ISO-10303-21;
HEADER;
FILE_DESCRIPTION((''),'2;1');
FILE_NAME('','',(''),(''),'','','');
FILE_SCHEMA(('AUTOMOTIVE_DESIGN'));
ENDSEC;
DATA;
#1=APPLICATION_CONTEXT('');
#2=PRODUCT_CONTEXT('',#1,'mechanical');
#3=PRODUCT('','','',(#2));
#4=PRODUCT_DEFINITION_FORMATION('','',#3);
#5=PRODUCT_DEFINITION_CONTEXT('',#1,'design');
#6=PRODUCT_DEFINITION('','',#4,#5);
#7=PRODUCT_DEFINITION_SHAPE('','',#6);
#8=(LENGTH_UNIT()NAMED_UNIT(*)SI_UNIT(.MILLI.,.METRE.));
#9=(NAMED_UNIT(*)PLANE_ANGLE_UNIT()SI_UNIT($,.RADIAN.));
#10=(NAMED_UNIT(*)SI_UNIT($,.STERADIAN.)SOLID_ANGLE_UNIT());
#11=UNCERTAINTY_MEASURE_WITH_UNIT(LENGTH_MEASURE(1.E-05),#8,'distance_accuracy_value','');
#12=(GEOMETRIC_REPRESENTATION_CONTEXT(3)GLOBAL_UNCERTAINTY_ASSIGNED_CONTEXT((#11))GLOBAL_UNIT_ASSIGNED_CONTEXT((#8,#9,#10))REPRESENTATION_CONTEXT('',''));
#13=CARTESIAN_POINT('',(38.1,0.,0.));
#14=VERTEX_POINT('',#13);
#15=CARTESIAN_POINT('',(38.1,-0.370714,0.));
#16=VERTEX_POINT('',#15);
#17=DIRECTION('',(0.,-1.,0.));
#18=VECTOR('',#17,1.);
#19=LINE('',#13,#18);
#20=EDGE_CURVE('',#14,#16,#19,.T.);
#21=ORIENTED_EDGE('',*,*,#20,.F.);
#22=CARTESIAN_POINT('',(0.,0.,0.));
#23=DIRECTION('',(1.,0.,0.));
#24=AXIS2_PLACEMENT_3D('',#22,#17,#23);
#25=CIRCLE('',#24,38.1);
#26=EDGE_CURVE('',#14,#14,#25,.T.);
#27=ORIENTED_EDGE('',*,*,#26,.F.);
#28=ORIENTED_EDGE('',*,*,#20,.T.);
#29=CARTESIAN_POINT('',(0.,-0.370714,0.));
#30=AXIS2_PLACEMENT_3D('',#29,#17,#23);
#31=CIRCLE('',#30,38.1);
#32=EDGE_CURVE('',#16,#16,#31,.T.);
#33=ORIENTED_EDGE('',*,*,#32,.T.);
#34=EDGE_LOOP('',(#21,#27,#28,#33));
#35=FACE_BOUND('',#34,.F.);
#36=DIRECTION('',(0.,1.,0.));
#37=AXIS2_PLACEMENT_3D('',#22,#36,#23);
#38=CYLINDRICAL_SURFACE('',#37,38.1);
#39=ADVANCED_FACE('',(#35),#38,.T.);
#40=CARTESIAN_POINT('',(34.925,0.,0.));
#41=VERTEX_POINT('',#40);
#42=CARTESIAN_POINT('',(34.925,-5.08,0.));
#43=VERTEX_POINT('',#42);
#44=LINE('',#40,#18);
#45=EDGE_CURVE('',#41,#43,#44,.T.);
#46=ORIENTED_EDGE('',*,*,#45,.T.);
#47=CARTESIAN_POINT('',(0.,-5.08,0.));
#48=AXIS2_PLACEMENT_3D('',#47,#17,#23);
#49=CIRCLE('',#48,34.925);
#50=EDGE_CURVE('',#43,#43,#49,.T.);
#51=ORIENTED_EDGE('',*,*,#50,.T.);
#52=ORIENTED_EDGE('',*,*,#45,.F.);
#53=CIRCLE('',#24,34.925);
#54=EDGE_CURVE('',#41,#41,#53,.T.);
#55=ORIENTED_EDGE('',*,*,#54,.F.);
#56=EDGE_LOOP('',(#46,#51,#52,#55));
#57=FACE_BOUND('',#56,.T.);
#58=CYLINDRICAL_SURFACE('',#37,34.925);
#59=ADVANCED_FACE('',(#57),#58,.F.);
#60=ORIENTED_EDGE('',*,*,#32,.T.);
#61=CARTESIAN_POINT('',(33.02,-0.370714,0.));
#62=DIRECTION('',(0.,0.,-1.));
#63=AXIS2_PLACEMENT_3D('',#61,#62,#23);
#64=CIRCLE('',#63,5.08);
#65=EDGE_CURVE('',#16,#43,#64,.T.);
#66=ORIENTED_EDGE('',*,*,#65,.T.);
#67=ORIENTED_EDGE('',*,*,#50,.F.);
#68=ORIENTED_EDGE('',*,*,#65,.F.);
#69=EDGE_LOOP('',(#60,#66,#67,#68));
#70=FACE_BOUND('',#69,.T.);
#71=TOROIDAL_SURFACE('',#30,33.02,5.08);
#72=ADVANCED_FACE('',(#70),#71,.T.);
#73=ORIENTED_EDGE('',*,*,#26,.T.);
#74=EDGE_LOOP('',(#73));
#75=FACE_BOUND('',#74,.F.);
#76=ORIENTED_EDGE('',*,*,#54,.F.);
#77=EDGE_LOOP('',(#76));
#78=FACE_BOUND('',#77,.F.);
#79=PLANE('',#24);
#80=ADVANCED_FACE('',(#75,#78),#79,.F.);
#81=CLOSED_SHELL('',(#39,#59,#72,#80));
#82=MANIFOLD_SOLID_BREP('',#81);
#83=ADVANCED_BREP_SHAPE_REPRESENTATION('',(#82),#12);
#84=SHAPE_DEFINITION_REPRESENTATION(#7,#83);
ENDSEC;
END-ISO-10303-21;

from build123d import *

# Parameters (mm, degrees)
F0_R     = 38.1
F0_R_2   = 34.925
F1_DEPTH = 5.08


# Not quite as in the source:
# - a fillet or chamfer that OpenCascade refuses, or shapes differently, is made with other operations: its cross-section is extruded or revolved along the edge and cut away or added


with BuildPart() as f1:
    # F0 (on Front) → F1 (new body)
    with BuildSketch(Plane.XZ):
        Circle(F0_R)
        Circle(F0_R_2, mode=Mode.SUBTRACT)
    extrude(amount=F1_DEPTH)

    # F2: fillet of radius 5.08 on 1 edges, made by hand

    # F2_s1 → F2_t2 (revolve, cut)
    with BuildSketch(Plane.XY):
        with BuildLine():
            ThreePointArc((38.1, -0.3707139607), (37.2321134838, -3.2105202921), (34.925, -5.08))
            Line((34.925, -5.08), (38.1, -5.08))
            Line((38.1, -5.08), (38.1, -0.3707139607))
        make_face()
    revolve(axis=Axis((0, -5.08, 0), (0, -1, 0)), mode=Mode.SUBTRACT)


solid = f1.part
